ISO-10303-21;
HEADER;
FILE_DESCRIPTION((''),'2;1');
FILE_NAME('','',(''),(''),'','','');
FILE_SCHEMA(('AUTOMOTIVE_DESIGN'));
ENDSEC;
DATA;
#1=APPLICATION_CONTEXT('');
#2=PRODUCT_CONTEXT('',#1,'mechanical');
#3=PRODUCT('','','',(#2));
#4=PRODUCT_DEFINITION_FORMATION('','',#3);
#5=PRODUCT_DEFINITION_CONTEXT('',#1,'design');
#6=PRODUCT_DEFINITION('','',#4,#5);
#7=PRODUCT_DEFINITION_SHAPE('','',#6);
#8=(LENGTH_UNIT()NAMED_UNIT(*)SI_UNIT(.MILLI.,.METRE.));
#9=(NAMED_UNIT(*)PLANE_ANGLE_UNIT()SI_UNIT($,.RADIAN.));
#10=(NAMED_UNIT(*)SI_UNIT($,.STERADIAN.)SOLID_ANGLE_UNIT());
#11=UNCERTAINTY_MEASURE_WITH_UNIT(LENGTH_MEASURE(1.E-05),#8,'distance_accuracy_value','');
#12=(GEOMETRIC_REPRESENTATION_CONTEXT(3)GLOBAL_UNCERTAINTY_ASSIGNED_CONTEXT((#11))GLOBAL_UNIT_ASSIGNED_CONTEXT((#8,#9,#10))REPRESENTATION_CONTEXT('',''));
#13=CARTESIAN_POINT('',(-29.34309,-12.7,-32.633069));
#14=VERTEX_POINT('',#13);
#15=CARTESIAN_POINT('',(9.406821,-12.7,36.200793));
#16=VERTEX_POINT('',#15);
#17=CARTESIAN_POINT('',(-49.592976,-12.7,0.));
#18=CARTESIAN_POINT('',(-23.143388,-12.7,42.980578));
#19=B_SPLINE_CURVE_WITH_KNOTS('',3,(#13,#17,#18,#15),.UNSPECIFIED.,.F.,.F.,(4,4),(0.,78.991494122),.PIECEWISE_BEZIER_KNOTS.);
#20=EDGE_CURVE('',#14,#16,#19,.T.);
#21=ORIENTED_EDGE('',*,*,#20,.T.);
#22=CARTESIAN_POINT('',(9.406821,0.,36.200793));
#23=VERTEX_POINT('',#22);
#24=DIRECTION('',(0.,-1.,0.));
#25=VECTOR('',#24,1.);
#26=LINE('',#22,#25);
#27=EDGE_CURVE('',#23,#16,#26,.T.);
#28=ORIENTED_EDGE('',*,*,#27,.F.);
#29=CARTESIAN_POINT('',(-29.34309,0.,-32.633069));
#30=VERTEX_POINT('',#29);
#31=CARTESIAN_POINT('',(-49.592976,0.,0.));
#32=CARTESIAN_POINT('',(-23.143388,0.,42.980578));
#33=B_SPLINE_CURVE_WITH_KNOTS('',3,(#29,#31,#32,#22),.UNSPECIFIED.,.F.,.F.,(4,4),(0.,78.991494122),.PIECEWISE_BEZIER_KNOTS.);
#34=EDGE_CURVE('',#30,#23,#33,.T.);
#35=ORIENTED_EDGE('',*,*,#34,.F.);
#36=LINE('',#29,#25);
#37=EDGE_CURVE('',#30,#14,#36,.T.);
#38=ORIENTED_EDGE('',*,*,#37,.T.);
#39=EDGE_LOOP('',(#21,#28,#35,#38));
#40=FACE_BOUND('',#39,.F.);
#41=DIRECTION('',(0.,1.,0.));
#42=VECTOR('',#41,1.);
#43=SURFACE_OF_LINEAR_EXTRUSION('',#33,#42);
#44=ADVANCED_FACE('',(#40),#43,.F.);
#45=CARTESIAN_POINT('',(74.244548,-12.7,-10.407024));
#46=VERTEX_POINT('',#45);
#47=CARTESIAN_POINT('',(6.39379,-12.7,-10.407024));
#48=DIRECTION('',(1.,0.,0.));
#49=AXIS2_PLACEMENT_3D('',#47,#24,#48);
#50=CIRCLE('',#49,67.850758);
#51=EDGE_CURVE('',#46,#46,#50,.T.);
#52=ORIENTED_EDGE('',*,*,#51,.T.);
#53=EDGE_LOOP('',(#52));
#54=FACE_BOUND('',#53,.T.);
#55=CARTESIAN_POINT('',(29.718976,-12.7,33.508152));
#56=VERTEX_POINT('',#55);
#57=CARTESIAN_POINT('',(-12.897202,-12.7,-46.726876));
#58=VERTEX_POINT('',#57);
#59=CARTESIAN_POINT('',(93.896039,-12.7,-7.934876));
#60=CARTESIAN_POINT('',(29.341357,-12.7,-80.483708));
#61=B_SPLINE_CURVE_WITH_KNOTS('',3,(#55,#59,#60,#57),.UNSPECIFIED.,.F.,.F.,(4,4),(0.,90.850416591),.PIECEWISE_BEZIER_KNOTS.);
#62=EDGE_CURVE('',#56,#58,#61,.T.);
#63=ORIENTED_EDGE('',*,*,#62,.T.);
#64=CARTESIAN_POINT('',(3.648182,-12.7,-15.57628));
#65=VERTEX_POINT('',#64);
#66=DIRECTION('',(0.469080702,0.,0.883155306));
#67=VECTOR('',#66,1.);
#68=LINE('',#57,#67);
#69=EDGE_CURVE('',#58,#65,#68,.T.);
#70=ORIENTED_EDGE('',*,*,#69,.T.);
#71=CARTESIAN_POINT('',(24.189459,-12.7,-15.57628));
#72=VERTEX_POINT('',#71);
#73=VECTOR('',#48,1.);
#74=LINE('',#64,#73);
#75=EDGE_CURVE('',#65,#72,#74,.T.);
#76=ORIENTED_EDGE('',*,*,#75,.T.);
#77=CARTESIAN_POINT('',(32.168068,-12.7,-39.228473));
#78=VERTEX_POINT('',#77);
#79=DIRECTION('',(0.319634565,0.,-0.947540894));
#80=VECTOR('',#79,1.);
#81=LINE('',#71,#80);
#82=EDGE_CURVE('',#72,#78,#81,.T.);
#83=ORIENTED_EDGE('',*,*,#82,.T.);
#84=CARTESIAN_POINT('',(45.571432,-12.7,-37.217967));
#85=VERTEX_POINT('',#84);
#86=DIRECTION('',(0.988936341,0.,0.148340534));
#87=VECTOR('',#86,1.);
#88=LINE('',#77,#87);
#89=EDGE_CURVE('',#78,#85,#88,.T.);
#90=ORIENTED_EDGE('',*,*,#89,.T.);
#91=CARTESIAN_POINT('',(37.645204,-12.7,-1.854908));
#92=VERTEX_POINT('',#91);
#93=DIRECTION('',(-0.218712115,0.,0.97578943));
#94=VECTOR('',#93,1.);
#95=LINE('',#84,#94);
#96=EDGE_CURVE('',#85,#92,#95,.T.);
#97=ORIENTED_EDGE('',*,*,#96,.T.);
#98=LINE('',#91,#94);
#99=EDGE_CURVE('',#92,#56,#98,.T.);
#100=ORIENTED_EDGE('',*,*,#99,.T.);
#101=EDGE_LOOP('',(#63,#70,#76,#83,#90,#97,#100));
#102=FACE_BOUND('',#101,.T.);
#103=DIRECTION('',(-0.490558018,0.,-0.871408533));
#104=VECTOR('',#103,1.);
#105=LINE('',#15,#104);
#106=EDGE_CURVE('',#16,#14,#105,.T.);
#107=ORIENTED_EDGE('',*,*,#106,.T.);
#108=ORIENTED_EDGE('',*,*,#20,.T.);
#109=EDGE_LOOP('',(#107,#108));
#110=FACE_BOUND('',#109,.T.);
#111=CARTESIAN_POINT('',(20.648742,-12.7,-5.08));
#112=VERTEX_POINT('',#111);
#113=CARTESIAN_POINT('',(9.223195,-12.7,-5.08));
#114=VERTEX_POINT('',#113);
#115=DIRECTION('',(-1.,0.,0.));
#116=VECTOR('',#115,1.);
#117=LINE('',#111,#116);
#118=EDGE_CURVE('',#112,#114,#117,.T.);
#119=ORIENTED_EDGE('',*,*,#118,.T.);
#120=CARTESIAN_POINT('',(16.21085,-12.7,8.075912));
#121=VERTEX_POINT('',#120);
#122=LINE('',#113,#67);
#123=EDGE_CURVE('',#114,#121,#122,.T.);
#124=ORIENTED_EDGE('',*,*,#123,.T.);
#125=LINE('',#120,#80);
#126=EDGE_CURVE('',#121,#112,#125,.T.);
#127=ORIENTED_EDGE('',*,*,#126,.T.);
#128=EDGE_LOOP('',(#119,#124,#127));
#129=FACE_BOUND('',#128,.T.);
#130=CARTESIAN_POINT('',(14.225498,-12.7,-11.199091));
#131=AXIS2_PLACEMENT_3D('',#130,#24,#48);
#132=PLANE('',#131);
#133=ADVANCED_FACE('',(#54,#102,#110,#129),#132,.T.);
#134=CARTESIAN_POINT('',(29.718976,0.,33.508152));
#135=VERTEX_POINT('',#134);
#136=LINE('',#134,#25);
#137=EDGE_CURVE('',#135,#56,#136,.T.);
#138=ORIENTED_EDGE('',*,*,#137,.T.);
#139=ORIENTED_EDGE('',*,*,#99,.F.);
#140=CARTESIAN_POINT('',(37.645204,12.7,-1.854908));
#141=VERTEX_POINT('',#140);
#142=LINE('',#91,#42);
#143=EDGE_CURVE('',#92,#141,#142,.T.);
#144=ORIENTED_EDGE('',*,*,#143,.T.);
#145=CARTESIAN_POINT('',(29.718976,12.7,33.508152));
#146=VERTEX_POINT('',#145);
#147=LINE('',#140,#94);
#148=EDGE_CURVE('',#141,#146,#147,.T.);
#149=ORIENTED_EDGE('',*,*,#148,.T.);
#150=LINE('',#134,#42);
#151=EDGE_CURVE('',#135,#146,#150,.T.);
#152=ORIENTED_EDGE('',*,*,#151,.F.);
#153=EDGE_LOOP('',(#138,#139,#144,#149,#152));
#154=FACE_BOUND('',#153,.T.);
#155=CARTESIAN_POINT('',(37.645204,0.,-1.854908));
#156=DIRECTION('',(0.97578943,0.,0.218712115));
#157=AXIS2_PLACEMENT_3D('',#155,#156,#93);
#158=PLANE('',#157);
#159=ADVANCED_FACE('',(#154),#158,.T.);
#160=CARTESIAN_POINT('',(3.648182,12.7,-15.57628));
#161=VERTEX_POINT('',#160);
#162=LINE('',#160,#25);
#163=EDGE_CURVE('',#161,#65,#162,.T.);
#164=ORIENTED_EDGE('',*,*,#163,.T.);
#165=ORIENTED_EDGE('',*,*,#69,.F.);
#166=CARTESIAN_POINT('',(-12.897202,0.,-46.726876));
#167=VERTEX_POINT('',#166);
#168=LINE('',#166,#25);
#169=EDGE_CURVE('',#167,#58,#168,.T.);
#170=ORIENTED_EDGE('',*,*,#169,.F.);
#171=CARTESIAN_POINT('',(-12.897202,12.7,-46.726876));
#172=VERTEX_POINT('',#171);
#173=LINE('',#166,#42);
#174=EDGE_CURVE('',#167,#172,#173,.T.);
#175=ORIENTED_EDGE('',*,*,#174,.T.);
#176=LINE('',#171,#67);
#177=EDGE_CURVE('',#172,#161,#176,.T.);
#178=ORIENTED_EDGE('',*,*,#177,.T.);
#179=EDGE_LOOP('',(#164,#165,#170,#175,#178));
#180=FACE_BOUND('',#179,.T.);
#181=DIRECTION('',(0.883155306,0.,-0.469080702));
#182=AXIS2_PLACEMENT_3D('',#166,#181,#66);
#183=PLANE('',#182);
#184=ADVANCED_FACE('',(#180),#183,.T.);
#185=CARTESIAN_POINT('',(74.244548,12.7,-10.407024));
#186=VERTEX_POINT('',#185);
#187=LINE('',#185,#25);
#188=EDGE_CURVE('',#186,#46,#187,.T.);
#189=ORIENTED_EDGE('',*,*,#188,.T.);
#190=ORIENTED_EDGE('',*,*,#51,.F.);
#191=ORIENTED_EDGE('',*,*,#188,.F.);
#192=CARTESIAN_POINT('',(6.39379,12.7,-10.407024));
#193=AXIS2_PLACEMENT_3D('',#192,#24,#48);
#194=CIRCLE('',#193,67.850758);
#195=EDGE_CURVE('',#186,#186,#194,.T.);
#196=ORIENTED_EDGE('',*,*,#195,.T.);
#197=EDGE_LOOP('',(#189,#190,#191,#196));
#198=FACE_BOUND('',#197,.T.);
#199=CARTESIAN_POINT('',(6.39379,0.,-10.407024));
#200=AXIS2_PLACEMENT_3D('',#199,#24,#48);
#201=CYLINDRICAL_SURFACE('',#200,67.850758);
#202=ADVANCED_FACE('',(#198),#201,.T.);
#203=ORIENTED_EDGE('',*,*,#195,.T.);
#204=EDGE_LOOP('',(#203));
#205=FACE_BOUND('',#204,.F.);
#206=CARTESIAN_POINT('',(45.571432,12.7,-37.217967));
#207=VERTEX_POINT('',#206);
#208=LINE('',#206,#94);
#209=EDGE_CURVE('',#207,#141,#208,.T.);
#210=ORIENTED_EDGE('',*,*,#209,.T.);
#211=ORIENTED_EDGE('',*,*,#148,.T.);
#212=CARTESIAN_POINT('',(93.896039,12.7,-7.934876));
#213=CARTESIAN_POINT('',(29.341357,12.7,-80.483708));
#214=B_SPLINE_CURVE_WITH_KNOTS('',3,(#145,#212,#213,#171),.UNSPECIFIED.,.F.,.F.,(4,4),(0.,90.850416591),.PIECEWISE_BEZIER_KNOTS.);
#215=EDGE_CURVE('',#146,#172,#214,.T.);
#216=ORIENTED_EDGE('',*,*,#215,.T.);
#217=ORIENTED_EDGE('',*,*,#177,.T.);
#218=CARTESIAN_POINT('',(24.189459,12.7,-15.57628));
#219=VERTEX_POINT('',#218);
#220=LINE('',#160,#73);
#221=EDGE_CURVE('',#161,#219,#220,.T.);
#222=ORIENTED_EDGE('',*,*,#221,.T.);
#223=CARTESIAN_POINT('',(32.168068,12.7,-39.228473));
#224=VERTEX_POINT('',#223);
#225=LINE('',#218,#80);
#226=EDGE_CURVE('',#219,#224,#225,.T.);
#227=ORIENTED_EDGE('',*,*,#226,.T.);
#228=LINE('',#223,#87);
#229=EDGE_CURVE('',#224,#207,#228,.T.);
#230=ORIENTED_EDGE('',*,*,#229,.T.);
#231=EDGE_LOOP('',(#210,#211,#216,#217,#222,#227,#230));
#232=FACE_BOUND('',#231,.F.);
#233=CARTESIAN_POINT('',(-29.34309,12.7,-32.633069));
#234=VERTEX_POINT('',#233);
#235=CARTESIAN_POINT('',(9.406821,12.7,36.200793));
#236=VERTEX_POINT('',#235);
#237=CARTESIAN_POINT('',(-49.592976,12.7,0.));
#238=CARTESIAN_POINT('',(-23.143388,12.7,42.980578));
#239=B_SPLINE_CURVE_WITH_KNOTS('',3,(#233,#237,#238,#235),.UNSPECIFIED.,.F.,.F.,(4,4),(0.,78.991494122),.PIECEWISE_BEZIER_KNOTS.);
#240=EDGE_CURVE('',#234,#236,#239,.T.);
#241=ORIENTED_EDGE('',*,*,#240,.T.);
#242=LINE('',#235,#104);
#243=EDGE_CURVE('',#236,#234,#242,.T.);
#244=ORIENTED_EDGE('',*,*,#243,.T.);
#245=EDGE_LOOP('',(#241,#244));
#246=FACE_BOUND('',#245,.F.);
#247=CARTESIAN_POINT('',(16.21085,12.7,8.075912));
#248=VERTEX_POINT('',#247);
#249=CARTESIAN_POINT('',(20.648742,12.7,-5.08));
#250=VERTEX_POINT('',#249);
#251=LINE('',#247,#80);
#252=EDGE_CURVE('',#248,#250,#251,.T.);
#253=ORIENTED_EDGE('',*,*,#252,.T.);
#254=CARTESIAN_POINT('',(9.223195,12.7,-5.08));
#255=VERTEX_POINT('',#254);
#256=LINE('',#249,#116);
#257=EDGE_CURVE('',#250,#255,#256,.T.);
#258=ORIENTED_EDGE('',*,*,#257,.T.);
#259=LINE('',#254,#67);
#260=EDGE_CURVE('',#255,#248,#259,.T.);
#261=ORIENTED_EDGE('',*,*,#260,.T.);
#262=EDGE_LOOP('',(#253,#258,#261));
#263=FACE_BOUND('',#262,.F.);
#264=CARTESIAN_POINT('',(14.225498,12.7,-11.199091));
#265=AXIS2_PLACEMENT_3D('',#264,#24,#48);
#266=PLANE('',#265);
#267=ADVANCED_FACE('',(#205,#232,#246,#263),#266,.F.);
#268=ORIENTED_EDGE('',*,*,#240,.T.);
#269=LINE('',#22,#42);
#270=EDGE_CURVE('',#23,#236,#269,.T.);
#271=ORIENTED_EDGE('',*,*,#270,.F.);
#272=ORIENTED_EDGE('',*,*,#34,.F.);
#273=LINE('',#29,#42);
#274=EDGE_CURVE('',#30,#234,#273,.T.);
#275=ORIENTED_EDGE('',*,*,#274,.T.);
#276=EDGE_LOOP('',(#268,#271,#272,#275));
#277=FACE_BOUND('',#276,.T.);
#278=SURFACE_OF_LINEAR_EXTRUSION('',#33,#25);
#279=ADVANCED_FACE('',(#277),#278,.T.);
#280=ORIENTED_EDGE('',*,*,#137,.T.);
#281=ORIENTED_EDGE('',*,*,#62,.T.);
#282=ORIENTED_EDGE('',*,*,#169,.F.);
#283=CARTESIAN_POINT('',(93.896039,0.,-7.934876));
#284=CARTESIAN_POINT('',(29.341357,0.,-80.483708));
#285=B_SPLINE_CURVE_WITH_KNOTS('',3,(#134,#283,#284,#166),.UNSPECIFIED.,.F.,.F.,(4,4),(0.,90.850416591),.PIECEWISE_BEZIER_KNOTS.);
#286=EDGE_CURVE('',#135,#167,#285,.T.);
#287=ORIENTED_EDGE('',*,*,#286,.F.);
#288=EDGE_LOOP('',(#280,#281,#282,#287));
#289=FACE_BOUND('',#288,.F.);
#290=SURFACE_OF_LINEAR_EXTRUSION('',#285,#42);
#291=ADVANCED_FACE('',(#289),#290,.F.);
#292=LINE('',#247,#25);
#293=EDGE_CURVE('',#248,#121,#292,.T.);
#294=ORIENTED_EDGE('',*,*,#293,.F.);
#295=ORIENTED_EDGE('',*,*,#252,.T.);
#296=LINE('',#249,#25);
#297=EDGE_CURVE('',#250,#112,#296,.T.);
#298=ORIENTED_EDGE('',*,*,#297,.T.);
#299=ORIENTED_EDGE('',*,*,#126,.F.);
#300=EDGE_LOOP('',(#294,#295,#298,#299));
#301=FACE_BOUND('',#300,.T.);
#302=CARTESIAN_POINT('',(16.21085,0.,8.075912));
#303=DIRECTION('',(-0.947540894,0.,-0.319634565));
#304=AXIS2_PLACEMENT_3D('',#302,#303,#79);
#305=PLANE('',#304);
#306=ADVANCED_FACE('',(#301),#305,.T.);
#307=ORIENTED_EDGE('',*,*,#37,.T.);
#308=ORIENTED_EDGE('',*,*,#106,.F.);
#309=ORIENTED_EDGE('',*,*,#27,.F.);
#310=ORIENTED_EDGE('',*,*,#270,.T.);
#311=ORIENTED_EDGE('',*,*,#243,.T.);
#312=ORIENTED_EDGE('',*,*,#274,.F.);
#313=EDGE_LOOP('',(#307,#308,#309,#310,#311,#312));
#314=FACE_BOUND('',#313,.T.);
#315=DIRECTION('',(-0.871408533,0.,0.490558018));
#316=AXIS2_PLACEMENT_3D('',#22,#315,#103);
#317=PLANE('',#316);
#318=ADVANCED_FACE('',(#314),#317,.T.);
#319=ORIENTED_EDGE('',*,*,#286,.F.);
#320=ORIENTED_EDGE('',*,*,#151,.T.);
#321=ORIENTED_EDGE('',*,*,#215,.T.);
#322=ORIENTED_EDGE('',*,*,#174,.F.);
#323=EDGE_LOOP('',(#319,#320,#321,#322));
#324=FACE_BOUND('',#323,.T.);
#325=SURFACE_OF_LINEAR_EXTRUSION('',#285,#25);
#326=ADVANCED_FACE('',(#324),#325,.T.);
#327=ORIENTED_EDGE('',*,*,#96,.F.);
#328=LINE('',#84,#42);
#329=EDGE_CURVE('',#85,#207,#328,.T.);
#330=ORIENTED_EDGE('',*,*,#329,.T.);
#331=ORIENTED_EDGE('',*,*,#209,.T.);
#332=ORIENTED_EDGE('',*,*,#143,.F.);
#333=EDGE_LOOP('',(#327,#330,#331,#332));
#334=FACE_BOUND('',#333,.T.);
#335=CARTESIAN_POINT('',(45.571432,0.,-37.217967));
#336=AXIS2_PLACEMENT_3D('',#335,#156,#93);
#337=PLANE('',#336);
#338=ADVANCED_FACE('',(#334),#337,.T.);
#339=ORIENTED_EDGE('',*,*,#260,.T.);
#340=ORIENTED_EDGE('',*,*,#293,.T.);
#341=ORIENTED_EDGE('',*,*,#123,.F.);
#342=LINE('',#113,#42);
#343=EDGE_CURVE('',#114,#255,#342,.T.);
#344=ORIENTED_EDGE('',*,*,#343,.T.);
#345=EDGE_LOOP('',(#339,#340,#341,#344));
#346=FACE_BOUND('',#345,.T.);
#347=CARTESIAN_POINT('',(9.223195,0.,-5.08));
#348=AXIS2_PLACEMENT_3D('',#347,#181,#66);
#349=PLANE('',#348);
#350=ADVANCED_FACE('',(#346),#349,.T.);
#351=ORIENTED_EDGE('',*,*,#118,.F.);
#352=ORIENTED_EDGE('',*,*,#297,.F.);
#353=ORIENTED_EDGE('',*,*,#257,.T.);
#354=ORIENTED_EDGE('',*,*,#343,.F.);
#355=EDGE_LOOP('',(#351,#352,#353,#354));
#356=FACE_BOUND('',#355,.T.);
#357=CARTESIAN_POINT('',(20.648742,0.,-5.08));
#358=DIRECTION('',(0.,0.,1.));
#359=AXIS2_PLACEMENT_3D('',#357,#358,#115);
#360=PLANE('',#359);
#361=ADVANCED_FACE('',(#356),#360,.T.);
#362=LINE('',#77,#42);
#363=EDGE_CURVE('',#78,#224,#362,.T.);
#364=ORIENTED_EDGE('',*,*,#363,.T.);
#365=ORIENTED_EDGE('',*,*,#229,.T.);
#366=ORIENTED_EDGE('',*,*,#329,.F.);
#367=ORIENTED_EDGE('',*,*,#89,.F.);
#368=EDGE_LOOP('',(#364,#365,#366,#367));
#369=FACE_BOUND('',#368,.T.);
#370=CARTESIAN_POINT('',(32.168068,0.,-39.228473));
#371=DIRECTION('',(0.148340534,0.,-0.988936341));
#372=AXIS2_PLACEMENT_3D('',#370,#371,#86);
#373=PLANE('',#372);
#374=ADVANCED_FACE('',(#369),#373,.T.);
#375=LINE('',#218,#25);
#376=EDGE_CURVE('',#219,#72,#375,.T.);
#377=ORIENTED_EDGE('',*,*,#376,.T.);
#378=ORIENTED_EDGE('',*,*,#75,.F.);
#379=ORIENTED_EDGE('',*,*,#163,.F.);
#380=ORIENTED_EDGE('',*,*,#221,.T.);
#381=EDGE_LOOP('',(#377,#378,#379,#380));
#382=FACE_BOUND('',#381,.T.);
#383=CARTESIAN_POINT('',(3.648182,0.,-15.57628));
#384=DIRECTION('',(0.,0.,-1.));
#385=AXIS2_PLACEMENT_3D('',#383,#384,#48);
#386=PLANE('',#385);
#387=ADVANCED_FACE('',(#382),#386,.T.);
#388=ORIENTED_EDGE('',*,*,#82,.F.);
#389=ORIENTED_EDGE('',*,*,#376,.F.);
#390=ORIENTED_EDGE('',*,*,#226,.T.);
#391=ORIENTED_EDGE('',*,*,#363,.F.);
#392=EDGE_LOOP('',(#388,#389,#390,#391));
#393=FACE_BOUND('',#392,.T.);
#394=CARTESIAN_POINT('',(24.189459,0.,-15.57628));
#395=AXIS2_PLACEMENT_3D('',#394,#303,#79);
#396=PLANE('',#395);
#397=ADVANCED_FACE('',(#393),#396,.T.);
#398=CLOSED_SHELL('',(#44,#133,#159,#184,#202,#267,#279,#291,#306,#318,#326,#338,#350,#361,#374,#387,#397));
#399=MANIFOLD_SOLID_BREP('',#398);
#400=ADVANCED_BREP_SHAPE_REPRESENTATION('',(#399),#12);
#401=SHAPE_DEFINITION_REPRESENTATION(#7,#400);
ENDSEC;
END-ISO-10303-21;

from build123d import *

# Parameters (mm, degrees)
F0_R     = 67.8507584939
F1_DEPTH = 12.7
F2_DEPTH = 12.7
F3_DEPTH = 12.7


# Not quite as in the source:
# - a feature of the source that left no trace in its solid (it failed there, or was rolled back) is left out


with BuildPart() as f1:
    # F0 (on Front) → F1 (new body, symmetric)
    with BuildSketch(Plane.XZ):
        with Locations((6.3937897791, -10.4070244153)):
            Circle(F0_R)
        with BuildLine():
            Line((16.2108500706, 8.0759122229), (29.7189755197, 33.5081515453))
            add(Edge.make_bspline(
                [(29.7189755197, 33.5081515453), (93.8960388303, -7.9348757863), (29.3413570435, -80.48370842), (-12.8972016539, -46.7268759549)],
                knots=[0, 0, 0, 0, 90.8504165915, 90.8504165915, 90.8504165915, 90.8504165915], degree=3))
            Line((-12.8972016539, -46.7268759549), (3.6481818786, -15.5762803179))
            Line((3.6481818786, -15.5762803179), (9.2231951319, -5.08))
            Line((9.2231951319, -5.08), (16.2108500706, 8.0759122229))
        make_face(mode=Mode.SUBTRACT)
        with BuildLine():
            Line((9.4068207245, 36.2007932827), (-29.3430900942, -32.6330686977))
            add(Edge.make_bspline(
                [(-29.3430900942, -32.6330686977), (-49.592975527, 0), (-23.1433883309, 42.9805777967), (9.4068207245, 36.2007932827)],
                knots=[0, 0, 0, 0, 78.9914941218, 78.9914941218, 78.9914941218, 78.9914941218], degree=3))
        make_face(mode=Mode.SUBTRACT)
    extrude(amount=F1_DEPTH, both=True)

    # F0 (on Front) → F2 (join, symmetric)
    with BuildSketch(Plane.XZ):
        Polygon((37.6452035187, -1.8549078334), (29.7189755197, 33.5081515453), (16.2108500706, 8.0759122229), (20.6487422011, -5.08), (24.1894590312, -15.5762803179), (32.1680679917, -39.2284728587), (45.5714315176, -37.2179672122), align=None)
    extrude(amount=F2_DEPTH, both=True)

    # F0 (on Front) → F3 (join, symmetric)
    with BuildSketch(Plane.XZ):
        Polygon((20.6487422011, -5.08), (9.2231951319, -5.08), (3.6481818786, -15.5762803179), (24.1894590312, -15.5762803179), align=None)
    extrude(amount=F3_DEPTH, both=True)


solid = f1.part
